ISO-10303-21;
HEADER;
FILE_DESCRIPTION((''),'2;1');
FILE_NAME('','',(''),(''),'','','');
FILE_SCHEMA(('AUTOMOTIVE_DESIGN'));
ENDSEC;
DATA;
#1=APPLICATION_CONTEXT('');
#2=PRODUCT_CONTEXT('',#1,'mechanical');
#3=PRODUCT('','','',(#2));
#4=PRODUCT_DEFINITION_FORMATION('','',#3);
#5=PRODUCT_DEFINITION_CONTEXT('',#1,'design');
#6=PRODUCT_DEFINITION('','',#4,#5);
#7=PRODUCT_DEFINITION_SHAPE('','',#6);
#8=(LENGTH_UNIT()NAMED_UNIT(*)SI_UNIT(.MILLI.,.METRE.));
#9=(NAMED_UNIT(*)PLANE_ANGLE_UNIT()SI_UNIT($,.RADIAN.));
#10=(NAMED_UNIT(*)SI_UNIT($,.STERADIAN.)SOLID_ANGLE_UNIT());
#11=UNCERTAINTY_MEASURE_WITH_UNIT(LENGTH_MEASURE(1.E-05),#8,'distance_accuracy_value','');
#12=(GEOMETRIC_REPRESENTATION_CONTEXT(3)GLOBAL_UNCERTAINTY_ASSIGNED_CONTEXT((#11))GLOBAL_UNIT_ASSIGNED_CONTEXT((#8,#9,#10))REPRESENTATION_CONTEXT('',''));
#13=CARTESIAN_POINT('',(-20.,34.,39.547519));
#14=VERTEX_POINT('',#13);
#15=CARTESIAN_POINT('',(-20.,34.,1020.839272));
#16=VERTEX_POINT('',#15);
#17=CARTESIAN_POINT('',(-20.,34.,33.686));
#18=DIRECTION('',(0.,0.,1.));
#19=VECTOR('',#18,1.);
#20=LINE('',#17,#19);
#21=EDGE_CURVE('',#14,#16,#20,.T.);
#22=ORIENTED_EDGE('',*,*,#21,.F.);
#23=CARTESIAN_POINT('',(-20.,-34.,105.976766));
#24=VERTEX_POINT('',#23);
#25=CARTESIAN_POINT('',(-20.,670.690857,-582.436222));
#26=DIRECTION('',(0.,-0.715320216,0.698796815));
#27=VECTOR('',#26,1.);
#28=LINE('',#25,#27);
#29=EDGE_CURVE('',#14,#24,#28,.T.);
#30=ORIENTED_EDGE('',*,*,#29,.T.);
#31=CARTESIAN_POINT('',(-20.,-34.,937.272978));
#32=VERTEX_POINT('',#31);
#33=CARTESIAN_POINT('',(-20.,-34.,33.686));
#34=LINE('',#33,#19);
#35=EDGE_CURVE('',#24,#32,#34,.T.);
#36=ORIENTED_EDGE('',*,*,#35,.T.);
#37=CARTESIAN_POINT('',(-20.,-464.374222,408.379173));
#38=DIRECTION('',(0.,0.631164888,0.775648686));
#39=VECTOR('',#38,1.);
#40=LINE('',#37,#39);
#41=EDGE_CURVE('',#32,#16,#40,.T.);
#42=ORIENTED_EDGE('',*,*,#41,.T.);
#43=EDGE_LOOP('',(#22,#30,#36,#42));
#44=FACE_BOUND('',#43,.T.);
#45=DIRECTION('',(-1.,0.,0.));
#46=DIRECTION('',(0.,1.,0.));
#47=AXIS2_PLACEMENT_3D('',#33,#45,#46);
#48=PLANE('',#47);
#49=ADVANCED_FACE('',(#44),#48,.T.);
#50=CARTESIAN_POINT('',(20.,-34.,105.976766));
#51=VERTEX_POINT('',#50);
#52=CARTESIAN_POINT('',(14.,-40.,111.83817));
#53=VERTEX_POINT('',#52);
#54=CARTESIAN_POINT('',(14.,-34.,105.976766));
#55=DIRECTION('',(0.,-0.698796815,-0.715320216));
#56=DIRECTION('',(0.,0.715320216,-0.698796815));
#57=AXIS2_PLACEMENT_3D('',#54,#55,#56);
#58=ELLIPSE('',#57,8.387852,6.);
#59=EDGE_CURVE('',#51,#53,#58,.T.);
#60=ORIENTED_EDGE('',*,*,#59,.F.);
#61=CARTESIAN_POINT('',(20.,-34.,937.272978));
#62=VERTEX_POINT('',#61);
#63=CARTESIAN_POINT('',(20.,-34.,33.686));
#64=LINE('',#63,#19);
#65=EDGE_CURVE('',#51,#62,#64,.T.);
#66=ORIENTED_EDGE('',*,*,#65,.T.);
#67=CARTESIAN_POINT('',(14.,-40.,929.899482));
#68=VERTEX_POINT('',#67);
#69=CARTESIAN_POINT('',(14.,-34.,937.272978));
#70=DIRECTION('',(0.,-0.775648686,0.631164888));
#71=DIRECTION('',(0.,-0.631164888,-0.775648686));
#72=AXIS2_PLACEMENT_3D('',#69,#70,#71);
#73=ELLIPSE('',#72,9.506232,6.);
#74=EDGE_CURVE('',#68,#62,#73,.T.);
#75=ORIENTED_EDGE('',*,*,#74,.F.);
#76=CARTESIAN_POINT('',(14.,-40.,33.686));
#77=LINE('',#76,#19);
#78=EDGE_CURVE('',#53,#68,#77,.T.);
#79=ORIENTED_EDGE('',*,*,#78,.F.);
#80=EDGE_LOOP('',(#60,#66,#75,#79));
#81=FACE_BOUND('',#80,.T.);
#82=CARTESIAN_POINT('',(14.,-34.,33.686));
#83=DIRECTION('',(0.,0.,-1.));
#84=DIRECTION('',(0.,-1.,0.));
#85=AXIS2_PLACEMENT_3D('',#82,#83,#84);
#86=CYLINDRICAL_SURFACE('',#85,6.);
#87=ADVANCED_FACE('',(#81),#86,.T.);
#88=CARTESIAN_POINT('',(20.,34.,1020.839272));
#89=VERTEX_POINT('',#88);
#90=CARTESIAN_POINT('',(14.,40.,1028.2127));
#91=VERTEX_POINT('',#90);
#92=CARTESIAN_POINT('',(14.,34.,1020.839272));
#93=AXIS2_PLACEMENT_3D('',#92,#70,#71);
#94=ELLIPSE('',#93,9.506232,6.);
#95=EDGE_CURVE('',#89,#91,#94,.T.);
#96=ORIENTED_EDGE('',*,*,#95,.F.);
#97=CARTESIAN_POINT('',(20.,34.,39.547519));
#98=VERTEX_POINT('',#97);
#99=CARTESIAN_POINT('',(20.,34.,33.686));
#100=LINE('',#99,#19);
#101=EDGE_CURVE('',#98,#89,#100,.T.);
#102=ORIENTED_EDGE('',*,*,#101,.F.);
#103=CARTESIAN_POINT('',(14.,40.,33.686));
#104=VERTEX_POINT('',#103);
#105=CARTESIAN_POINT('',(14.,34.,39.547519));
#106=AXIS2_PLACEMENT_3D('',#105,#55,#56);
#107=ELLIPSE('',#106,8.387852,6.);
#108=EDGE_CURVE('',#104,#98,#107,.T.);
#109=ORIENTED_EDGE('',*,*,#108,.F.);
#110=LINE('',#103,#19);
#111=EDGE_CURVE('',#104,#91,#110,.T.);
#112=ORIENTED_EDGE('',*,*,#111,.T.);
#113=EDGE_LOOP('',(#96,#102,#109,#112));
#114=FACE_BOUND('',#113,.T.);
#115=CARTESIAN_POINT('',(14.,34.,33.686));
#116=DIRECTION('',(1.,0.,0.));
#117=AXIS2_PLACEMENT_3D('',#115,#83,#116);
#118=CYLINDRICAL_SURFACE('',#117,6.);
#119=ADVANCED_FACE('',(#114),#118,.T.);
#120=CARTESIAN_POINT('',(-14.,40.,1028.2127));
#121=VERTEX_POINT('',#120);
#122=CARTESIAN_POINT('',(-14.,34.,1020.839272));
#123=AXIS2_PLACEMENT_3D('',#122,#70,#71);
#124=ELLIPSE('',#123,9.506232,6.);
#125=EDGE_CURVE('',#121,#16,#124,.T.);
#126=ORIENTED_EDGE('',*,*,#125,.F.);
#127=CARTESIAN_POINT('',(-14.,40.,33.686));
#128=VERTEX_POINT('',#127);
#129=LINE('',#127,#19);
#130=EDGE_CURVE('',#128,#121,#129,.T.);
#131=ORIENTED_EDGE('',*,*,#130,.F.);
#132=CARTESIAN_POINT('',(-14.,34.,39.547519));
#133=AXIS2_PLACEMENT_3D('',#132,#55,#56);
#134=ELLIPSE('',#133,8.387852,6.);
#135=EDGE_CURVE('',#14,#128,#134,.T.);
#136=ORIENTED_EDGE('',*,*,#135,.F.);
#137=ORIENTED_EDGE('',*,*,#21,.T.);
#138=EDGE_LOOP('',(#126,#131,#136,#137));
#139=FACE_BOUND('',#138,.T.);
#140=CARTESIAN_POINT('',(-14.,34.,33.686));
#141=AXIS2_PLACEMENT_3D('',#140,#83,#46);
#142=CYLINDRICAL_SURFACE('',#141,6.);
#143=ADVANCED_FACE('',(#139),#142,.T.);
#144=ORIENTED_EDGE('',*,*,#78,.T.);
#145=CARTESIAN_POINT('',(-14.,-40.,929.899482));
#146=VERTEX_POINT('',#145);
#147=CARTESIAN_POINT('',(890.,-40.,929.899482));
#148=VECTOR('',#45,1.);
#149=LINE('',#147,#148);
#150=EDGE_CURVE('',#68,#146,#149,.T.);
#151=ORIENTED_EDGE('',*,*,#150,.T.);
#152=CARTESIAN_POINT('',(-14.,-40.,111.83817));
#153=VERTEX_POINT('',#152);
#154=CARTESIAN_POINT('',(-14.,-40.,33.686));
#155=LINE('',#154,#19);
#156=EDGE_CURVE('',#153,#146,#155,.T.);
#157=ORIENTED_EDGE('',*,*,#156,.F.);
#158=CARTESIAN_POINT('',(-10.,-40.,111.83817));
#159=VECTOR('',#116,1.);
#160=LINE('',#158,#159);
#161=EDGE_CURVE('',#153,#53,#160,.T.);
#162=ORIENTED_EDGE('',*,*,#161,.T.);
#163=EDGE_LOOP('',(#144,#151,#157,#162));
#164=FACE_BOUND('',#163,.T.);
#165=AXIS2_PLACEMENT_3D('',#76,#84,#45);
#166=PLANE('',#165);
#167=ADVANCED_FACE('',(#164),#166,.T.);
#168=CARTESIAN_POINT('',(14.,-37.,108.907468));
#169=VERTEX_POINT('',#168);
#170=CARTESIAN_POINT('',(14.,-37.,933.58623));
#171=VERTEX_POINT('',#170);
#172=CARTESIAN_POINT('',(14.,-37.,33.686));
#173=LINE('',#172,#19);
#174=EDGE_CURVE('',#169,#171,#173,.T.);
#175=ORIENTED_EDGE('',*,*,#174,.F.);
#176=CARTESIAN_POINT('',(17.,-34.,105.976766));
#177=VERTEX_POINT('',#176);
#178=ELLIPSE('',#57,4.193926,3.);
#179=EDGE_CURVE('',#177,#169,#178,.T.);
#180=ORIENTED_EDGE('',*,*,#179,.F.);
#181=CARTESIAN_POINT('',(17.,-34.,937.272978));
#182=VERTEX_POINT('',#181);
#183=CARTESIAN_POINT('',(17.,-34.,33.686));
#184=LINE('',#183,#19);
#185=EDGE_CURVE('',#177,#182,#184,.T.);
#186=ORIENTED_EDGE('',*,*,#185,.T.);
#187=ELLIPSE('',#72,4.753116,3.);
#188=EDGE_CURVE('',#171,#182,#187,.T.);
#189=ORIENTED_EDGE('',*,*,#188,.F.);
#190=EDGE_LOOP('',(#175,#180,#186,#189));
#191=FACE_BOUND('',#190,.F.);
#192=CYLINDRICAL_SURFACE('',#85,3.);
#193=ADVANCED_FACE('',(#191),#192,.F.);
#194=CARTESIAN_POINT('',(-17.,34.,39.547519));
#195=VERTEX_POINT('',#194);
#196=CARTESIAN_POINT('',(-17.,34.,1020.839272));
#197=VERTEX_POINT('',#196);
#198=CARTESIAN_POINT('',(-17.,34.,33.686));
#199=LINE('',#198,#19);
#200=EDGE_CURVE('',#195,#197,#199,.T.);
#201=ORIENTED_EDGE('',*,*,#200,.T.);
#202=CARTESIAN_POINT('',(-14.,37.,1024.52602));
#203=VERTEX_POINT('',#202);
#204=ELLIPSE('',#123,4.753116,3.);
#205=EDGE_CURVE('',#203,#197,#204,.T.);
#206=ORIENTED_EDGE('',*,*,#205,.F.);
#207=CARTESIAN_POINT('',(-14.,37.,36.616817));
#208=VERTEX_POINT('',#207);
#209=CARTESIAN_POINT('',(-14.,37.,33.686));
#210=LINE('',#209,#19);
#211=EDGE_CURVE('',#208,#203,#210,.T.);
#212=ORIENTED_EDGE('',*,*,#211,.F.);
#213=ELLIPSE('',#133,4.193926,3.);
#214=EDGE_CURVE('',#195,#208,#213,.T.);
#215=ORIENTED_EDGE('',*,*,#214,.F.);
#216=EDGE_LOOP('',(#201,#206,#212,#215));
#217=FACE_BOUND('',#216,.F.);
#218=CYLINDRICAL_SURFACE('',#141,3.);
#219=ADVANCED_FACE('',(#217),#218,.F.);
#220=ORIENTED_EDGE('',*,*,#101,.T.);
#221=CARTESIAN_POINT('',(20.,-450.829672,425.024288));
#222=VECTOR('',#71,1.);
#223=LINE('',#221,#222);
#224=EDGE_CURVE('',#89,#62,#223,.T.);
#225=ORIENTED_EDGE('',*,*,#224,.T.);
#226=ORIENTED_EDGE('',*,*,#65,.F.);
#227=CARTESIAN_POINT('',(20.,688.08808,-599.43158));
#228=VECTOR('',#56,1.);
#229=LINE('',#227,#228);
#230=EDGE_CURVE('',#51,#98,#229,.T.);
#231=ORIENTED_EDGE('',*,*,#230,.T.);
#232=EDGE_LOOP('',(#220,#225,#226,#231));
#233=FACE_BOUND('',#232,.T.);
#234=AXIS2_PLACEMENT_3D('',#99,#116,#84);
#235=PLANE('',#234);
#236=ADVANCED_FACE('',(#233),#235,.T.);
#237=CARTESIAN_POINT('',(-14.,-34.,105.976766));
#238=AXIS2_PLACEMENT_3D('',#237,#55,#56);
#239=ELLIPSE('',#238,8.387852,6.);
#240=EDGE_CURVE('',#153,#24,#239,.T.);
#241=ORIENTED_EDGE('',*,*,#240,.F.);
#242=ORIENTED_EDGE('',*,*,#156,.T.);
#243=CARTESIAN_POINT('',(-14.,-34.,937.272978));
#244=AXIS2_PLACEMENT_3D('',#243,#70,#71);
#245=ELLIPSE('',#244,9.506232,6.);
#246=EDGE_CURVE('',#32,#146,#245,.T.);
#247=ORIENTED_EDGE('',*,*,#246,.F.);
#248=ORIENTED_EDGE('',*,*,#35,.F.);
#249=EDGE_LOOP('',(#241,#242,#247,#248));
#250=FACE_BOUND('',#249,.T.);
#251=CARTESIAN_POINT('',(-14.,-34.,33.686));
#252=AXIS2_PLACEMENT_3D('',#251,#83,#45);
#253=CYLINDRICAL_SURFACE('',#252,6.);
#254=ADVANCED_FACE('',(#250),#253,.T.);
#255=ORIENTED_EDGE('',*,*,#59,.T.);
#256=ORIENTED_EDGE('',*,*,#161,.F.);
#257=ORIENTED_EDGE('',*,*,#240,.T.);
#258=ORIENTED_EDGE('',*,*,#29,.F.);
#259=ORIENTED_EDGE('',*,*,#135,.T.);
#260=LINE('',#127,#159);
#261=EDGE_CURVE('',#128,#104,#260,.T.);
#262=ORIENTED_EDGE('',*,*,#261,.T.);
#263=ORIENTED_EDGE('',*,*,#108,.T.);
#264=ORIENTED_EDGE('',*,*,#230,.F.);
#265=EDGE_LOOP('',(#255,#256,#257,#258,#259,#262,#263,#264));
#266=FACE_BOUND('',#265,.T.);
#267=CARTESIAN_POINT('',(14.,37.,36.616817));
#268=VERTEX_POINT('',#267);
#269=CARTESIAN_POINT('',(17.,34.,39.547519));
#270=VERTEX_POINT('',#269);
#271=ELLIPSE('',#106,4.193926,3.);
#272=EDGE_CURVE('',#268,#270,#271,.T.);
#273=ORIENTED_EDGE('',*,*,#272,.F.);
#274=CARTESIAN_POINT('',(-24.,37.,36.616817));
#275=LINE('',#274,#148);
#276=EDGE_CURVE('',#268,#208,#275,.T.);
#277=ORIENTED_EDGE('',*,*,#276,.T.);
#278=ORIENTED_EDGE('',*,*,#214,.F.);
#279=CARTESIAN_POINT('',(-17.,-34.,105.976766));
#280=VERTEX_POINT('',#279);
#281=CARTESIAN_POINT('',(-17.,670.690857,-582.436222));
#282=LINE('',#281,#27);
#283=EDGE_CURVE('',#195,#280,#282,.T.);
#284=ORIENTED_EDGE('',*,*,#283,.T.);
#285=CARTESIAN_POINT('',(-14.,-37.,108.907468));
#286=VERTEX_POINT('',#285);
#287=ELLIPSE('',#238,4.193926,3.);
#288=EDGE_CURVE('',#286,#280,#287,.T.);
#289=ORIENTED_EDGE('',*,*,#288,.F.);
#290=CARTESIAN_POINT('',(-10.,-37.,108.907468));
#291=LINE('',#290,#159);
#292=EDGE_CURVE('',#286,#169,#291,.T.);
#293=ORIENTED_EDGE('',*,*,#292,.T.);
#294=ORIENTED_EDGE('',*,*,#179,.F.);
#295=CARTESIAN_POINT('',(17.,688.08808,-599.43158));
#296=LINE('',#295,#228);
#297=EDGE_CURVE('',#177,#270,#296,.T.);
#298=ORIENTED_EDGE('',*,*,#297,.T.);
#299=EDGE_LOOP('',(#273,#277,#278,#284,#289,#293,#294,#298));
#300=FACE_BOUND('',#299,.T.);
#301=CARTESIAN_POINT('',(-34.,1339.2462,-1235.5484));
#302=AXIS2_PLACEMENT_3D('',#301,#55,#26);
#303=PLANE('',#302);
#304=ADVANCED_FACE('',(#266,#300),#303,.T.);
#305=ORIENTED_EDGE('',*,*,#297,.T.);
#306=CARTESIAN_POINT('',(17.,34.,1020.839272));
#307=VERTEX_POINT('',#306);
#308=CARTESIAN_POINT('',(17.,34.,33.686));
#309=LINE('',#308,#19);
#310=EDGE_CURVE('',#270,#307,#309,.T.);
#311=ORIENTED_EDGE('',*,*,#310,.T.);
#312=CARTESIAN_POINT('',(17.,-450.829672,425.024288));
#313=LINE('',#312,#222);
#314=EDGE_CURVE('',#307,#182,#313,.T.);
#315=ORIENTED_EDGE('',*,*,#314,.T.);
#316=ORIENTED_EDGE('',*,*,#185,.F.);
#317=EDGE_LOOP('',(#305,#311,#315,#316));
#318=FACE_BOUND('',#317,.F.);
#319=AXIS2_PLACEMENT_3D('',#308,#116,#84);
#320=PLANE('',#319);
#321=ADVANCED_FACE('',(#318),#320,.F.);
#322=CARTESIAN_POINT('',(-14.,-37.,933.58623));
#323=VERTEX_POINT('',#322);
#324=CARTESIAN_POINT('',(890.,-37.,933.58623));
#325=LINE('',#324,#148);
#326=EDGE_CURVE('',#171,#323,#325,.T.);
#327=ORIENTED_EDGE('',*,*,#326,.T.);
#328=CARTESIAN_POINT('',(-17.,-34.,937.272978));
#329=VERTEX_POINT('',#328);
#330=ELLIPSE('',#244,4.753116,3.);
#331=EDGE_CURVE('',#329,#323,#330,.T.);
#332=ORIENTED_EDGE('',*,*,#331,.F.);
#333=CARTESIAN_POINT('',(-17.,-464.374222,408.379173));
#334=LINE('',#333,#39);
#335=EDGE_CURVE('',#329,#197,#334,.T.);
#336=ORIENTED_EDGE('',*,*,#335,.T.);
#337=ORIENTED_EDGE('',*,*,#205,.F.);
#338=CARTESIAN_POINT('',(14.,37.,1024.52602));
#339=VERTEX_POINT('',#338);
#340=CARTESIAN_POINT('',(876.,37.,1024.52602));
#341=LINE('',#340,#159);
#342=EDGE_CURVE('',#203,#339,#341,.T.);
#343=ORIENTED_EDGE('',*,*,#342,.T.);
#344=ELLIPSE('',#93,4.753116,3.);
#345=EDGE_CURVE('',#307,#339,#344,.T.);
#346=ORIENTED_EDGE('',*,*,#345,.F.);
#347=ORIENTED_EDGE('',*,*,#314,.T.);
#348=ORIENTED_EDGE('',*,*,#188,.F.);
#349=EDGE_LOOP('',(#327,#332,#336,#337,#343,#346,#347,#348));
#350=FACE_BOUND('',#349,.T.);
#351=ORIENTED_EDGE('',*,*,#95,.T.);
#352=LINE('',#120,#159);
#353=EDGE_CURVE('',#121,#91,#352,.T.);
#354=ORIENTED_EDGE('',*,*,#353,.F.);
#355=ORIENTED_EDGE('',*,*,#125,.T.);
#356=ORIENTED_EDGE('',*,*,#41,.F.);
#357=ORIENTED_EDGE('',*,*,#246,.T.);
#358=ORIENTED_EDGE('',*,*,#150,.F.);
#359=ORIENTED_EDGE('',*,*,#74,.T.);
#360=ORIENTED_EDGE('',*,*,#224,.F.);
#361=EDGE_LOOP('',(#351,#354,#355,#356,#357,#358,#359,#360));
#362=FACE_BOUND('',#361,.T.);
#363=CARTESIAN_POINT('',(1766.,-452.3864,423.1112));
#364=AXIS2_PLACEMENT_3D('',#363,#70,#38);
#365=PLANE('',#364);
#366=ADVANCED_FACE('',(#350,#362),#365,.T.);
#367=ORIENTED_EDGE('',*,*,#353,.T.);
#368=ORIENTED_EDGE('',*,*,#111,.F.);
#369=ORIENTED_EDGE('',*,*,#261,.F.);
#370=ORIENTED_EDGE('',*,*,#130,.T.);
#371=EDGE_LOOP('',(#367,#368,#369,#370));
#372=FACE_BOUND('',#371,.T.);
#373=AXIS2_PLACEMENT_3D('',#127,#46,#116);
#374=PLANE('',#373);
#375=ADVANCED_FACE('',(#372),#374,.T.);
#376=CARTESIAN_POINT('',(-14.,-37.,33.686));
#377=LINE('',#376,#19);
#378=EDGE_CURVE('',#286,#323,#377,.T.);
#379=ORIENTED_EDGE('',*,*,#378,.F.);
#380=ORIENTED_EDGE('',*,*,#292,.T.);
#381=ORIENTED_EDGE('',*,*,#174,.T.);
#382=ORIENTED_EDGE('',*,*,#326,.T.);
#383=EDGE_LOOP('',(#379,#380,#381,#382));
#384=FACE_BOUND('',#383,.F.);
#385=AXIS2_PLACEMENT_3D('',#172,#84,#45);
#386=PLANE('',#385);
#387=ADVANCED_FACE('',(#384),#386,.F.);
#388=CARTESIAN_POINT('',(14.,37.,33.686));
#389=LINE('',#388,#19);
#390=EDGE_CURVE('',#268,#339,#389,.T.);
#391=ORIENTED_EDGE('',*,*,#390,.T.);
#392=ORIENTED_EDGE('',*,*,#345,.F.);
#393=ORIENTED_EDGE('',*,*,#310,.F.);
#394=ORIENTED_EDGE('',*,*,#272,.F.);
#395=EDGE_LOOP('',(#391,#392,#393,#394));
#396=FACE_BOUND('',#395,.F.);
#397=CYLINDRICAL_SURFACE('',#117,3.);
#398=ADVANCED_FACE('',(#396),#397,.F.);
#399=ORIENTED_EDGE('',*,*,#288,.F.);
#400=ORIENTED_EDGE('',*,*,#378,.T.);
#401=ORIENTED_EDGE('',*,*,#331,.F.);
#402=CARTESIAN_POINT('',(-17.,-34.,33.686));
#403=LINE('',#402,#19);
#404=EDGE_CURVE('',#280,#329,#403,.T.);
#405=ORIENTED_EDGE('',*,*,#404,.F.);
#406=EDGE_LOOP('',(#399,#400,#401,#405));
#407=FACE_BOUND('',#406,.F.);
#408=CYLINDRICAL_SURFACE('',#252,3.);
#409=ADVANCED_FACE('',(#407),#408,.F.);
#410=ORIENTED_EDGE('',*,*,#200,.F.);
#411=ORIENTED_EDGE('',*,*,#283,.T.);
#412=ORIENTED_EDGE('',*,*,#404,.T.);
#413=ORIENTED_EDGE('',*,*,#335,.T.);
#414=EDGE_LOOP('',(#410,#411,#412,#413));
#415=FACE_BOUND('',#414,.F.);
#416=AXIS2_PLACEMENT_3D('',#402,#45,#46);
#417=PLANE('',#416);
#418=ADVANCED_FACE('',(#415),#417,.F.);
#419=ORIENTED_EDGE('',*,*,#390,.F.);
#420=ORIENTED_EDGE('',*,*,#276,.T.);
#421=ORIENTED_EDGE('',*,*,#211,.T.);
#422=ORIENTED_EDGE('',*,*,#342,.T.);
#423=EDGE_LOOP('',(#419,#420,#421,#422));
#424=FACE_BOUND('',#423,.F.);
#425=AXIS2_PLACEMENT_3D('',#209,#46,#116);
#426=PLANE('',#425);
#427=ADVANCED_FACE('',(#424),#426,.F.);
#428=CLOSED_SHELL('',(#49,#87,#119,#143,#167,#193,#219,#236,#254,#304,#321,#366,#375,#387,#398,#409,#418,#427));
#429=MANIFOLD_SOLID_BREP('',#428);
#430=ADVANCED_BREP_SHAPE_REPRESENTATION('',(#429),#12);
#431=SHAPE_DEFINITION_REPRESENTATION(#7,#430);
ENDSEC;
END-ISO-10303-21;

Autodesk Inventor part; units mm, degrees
ref_plane "Start Plane" through (0, 0, 33.686) normal (0, 0, 1) x (1, 0, 0)
ref_plane "End Plane" through (0, 0, 1028.2127) normal (0, 0, 1) x (1, 0, 0)
sketch "Sketch" plane through (0, 0, 0) normal (0, 0, 1) x (1, 0, 0)
  line L0 (-20, -34) -> (-20, 34)
  line L1 (-14, 40) -> (14, 40)
  line L2 (20, 34) -> (20, -34)
  line L3 (14, -40) -> (-14, -40)
  arc A0 (-20, -34) -> (-14, -40) centre (-14, -34) ccw
  arc A1 (20, 34) -> (14, 40) centre (14, 34) ccw
  arc A2 (-14, 40) -> (-20, 34) centre (-14, 34) ccw
  arc A3 (14, -40) -> (20, -34) centre (14, -34) ccw
  arc A4 (-14, 37) -> (-17, 34) centre (-14, 34) ccw
  line L4 (-14, 37) -> (14, 37)
  arc A5 (17, 34) -> (14, 37) centre (14, 34) ccw
  line L5 (17, 34) -> (17, -34)
  arc A6 (14, -37) -> (17, -34) centre (14, -34) ccw
  line L6 (14, -37) -> (-14, -37)
  arc A7 (-17, -34) -> (-14, -37) centre (-14, -34) ccw
  line L7 (-17, -34) -> (-17, 34)
  line L8 (0, 57.7397) -> (0, -57.7397) construction
  line L9 (-29.7397, 0) -> (29.7397, 0) construction
  dimension "d7" = 6
  dimension "d9" = 40
  dimension "d11" = 80
  dimension "d12" = 3
  dimension "d15" = 20
  dimension "d16" = 40
extrude "Body" add sketch "Sketch" along normal up to surface (994.5267 mm away) from surface at 33.686
sketch "Sketch3" plane through (0, 0, 0) normal (0, 0, 1) x (1, 0, 0)
  line L0 (0, 0) -> (10, 0)
ref_plane "Work Plane3" through (0, 0, 0) normal (0, -1, 0) x (1, 0, 0)
ref_plane "Work Plane4" through (1766, -452.3864, 423.1112) normal (0, -0.7756487, 0.6311649) x (1, 0, 0)
split "Split1" plane through (1766, -452.3864, 423.1112) removes the side toward (0, -0.7756487, 0.6311649)
ref_plane "Work Plane5" through (-34, 1339.2462, -1235.5484) normal (0, -0.6987968, -0.7153202) x (1, 0, 0)
split "Split2" plane through (-34, 1339.2462, -1235.5484) removes the side toward (0, -0.6987968, -0.7153202)
sketch "Sketch4" plane through (0, 0, 0) normal (0, -1, 0) x (1, 0, 0)
  line L0 (-2, 33.686) -> (12, 33.686) projected
  line L1 (-2, 1028.2127) -> (12, 1028.2127) projected
  dimension "d18" = 994.5267
equation "\"d7\" = G_IR"
equation "\"d9\" = G_W"
equation "\"d11\" = G_H"
equation "\"d12\" = G_T"
equation "\"d15\" = 0.5 * d9"
equation "\"d16\" = 0.5 * d11"
equation "\"d3\" = G_L"
equation "\"G_W\" = 40"
equation "\"G_H\" = 80"
equation "\"G_T\" = 3"
equation "\"G_IR\" = 6"
equation "\"G_L\" = d18"
equation "\"G_OFFSET_START\" = -33.68597"
equation "\"G_OFFSET_END\" = -155.18623"
equation "\"d13\" = -G_OFFSET_START"
equation "\"d14\" = G_OFFSET_END + B_L"
equation "\"B_L\" = 1183.39895"
properties part number "ISO 10799-2 - 80x40x3 - 994,53" material "Steel, Mild"
